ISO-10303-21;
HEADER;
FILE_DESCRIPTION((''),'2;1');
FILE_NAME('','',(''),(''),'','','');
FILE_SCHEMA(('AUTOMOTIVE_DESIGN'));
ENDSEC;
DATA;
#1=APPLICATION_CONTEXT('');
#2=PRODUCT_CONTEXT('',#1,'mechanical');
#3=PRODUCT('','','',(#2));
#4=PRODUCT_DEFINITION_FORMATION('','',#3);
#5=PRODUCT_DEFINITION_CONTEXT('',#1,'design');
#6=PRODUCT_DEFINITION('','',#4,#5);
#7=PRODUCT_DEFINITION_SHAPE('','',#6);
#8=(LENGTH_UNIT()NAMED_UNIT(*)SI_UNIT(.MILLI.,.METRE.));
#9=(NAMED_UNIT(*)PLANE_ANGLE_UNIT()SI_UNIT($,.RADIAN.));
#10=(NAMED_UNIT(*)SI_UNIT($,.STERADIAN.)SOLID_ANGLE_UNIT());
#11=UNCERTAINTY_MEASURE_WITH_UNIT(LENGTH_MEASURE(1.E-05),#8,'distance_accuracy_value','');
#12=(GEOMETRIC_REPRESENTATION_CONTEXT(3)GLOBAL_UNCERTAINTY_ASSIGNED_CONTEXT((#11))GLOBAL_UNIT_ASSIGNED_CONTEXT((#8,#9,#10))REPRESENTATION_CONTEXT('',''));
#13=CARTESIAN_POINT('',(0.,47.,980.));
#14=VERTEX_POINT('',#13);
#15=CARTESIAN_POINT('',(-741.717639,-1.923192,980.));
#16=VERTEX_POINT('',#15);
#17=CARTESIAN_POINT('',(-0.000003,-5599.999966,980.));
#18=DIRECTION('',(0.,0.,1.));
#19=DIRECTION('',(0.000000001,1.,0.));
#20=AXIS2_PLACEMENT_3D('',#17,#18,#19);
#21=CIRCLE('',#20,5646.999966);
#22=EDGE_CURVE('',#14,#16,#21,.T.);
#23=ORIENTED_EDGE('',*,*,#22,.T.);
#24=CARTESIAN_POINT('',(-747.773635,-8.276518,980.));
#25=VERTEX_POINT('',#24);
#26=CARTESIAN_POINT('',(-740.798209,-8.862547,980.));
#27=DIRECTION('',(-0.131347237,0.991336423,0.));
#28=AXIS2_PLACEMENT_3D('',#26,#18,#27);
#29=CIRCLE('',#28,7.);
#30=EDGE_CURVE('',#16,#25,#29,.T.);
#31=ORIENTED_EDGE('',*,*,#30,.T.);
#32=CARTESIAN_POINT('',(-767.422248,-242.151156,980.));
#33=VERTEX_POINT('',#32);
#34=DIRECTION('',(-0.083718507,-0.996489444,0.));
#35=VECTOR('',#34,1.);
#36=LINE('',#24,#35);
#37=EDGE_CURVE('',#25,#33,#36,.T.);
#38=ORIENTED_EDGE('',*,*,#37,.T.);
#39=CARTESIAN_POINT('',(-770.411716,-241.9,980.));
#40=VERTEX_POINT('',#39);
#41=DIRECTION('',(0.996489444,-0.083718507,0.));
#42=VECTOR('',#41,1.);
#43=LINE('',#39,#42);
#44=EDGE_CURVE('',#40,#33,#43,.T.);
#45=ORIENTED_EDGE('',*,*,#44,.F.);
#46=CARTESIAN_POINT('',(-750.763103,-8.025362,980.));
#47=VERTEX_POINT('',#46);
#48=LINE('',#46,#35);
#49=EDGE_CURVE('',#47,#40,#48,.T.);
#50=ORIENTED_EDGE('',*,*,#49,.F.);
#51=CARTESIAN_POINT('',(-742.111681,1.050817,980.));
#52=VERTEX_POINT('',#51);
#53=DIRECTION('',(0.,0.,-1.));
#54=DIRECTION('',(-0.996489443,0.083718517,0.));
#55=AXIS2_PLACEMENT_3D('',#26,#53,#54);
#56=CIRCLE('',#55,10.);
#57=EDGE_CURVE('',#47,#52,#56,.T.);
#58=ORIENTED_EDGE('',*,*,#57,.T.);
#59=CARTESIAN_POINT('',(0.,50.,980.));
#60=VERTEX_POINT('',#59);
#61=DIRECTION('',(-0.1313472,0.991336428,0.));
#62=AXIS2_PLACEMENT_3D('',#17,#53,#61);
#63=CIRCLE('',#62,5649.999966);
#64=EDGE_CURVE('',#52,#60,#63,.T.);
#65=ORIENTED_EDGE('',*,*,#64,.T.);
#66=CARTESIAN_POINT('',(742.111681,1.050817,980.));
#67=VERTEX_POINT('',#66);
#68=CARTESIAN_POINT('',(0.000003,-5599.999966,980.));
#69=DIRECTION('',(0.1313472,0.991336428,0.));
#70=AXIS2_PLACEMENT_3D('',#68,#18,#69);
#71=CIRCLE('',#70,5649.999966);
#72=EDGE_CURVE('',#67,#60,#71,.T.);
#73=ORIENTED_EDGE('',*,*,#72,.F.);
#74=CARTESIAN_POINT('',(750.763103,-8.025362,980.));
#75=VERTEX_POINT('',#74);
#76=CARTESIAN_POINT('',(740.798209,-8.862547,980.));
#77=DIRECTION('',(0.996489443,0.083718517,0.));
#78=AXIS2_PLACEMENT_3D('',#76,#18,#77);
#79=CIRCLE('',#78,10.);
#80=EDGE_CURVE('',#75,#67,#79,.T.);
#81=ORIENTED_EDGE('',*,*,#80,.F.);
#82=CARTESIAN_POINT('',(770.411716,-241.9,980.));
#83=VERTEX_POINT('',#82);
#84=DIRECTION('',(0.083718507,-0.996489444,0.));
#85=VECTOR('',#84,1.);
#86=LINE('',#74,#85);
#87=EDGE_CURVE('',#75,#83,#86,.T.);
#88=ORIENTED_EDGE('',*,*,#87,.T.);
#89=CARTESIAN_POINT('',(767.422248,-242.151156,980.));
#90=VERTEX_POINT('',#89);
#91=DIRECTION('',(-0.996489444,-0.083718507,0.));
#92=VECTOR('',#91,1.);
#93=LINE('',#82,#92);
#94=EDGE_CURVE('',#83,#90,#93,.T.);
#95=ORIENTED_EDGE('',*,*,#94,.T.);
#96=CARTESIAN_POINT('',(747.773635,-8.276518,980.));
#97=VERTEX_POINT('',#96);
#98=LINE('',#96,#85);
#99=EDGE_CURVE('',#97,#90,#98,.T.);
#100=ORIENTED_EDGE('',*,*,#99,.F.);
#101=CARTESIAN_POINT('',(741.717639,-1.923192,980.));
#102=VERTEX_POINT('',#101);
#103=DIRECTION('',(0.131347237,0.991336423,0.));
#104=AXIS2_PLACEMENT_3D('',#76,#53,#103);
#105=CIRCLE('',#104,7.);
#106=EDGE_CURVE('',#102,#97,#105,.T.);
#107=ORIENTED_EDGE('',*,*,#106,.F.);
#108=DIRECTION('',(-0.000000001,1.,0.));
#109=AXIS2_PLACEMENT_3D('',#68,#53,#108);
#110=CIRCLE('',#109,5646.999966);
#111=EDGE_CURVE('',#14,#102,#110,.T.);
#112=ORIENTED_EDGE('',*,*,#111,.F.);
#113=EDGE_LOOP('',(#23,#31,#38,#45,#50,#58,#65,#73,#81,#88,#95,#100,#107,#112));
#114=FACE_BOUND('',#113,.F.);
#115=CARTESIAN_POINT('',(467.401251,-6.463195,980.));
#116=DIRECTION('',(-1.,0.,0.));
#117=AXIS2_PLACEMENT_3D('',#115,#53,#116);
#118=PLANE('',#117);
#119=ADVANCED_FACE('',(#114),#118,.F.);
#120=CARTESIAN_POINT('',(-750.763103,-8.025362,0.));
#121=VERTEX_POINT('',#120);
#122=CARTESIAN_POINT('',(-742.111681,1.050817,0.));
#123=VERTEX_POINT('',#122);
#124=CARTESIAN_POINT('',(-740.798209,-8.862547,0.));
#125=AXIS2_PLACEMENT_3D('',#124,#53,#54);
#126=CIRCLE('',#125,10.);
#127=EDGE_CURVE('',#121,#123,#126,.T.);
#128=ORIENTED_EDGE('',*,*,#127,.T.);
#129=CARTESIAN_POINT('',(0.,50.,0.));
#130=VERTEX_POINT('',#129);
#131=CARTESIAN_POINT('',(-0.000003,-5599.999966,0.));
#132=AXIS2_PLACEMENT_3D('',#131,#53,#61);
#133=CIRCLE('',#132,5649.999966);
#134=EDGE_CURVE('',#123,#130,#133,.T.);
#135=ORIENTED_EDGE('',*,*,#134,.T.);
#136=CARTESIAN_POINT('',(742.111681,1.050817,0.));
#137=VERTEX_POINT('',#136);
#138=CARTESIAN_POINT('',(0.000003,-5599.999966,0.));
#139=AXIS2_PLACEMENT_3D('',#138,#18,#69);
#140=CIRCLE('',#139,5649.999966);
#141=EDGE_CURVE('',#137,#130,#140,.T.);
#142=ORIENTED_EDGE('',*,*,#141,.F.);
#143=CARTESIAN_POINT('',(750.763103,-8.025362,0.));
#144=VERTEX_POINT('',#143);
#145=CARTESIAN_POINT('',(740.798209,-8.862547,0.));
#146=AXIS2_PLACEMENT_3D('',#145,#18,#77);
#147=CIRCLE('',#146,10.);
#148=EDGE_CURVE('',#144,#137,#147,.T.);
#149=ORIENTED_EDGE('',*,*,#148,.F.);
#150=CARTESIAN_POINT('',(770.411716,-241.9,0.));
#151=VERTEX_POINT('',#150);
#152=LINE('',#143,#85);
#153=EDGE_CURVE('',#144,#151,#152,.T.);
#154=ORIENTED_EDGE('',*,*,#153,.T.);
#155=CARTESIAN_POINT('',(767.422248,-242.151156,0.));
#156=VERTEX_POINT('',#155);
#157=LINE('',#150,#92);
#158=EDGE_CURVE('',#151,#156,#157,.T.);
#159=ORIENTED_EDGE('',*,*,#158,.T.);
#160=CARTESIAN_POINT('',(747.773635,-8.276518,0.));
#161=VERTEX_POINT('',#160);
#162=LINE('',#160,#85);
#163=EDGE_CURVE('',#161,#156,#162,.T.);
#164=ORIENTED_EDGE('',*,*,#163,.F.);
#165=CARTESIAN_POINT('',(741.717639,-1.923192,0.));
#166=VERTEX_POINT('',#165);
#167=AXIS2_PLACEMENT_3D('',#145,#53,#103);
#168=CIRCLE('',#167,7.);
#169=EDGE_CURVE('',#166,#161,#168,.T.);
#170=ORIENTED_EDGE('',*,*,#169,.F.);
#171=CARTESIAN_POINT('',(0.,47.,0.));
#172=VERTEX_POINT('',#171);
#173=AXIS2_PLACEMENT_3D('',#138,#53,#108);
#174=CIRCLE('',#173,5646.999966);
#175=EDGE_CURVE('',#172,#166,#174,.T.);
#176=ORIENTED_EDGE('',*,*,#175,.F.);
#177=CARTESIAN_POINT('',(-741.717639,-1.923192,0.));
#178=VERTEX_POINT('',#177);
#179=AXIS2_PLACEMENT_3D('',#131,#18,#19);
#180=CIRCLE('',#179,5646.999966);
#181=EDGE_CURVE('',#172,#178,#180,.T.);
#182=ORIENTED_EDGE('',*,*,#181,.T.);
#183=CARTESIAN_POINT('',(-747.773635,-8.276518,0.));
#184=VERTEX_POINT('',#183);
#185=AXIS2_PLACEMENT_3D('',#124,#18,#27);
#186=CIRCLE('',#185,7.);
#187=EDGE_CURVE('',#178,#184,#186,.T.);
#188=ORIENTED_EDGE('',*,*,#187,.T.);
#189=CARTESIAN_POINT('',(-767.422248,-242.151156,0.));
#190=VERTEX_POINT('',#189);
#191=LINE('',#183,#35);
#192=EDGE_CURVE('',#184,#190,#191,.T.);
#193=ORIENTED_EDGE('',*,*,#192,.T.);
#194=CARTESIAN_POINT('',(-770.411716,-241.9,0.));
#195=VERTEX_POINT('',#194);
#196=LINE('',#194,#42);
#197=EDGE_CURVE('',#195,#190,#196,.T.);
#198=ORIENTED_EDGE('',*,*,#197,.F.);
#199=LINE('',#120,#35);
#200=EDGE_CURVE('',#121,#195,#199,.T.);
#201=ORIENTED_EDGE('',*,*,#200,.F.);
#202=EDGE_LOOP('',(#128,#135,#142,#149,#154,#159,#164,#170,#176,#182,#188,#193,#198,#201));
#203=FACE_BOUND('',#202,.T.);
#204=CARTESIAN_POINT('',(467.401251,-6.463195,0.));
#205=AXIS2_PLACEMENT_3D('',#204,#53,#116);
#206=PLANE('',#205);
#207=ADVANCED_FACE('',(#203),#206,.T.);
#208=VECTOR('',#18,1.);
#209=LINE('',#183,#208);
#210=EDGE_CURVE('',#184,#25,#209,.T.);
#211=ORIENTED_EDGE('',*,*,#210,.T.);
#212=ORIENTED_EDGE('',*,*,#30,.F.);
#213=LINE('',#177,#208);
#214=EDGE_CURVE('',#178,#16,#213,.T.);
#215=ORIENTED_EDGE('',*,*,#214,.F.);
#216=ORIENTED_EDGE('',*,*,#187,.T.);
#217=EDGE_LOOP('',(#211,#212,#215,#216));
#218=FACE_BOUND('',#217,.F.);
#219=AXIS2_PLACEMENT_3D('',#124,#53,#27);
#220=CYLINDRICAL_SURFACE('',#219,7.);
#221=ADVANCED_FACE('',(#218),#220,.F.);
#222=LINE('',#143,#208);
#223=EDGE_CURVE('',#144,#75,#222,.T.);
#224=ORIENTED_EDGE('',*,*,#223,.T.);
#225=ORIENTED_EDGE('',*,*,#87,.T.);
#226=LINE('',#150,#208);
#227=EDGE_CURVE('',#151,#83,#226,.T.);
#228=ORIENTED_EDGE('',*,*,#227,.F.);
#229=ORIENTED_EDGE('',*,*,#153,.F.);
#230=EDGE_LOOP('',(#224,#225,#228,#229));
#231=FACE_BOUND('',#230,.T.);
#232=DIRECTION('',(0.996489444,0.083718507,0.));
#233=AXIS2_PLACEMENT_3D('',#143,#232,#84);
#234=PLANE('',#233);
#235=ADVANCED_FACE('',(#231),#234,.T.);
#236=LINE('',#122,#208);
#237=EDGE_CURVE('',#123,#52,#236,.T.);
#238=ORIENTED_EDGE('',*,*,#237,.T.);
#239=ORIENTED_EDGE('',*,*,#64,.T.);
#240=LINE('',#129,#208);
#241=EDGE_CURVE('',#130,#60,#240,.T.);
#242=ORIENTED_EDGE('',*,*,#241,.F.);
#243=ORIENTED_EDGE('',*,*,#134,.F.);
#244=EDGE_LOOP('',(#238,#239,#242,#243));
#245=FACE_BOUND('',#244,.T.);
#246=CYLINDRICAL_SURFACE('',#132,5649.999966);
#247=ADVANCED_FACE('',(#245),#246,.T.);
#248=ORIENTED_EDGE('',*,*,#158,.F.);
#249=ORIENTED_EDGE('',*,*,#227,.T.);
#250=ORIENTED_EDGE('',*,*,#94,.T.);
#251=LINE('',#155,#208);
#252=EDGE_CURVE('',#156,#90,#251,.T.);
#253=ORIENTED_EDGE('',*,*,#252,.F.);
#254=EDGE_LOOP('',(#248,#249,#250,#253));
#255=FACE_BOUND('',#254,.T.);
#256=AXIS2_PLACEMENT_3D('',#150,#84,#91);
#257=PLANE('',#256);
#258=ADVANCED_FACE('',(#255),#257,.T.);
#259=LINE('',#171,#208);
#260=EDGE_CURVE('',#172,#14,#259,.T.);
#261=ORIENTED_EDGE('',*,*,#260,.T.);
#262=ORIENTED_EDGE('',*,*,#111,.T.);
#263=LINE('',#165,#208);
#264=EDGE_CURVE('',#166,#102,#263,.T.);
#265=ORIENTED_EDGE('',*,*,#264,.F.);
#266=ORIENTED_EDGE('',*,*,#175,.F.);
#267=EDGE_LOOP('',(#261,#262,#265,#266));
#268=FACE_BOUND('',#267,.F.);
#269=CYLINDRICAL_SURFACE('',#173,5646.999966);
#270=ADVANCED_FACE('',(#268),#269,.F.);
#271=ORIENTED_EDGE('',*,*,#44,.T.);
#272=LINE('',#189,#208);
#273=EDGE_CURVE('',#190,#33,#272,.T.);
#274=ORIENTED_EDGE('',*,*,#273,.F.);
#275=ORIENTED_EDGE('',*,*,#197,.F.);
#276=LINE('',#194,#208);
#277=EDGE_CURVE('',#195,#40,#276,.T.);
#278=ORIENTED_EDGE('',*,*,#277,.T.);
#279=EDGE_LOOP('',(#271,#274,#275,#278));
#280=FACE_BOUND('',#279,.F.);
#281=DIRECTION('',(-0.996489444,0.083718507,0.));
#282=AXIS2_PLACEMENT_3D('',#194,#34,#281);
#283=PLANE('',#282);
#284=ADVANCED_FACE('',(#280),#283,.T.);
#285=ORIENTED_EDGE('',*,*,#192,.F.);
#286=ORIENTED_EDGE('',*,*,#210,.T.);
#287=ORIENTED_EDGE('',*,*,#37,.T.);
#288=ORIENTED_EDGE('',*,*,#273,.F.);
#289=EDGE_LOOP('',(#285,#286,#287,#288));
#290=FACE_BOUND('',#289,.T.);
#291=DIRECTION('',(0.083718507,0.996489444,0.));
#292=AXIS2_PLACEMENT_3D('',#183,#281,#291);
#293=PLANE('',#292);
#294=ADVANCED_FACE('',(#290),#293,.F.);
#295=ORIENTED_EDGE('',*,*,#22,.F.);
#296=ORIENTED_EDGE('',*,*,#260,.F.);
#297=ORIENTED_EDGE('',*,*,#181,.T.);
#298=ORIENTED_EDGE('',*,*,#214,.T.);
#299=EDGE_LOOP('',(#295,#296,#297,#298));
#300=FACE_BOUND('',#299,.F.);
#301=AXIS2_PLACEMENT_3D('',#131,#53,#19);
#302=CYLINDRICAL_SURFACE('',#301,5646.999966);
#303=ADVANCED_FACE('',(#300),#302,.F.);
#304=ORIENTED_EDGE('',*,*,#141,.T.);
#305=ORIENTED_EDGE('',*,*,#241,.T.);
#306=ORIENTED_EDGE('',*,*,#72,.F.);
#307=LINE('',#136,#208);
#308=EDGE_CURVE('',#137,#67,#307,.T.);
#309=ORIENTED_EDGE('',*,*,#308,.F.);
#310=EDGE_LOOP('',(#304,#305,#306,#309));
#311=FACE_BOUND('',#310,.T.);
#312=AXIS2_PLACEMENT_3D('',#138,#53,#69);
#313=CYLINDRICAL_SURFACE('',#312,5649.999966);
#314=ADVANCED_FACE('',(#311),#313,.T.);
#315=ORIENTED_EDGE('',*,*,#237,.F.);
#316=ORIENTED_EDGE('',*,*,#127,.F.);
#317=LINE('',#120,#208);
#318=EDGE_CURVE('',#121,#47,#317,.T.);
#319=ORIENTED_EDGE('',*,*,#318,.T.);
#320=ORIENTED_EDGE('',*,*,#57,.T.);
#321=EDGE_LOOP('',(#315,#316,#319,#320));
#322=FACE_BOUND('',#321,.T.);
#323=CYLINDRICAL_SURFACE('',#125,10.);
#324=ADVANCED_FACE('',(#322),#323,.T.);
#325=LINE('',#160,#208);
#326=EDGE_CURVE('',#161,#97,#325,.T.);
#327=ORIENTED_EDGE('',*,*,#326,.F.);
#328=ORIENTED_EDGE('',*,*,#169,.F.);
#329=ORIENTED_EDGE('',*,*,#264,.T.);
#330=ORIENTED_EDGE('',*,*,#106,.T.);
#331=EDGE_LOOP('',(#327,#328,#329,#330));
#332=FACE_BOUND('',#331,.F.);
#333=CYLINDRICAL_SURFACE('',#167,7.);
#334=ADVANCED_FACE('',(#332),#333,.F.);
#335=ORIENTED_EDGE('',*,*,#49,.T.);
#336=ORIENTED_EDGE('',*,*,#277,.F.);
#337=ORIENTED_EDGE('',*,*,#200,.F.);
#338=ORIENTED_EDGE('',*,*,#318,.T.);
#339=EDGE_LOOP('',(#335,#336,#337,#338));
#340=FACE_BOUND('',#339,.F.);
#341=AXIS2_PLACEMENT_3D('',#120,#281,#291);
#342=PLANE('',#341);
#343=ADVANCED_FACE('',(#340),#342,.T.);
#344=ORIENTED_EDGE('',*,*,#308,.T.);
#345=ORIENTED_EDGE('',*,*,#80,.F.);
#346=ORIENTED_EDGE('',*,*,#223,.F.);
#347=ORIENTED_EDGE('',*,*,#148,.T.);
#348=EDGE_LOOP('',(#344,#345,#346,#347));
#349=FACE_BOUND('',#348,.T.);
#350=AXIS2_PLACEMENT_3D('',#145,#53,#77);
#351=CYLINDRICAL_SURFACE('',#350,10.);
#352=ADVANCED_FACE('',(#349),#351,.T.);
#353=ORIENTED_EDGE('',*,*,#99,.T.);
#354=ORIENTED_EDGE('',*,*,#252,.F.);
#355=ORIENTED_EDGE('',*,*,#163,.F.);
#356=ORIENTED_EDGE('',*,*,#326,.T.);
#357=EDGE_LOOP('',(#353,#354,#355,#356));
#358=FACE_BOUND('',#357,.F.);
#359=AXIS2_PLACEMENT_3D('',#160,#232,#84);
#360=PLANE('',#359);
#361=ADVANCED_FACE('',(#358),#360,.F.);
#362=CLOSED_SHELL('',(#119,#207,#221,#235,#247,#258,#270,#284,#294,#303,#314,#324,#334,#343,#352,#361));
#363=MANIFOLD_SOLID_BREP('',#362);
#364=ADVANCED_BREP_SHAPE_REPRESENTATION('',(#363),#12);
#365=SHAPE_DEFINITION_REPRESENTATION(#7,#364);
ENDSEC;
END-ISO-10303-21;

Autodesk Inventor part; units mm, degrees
ref_plane "YZ Plane" through (0, 0, 0) normal (1, 0, 0) x (0, 1, 0)
ref_plane "XZ Plane" through (0, 0, 0) normal (0, 1, 0) x (-1, 0, 0)
ref_plane "XY Plane" through (0, 0, 0) normal (0, 0, 1) x (1, 0, 0)
sketch "Sketch1" plane through (0, 0, 0) normal (0, 0, 1) x (1, 0, 0)
  line L0 (-750, 0) -> (750, 0) construction
  line L1 (750, 0) -> (750, -2700) construction
  line L2 (750, -2700) -> (-750, -2700) construction
  line L3 (-750, -2700) -> (-750, 0) construction
  line L4 (800, 50) -> (-800, 50) construction
  line L5 (-800, 50) -> (-800, -2750) construction
  line L6 (-800, -2750) -> (800, -2750) construction
  line L7 (800, -2750) -> (800, 50) construction
  line L8 (-850, 100) -> (850, 100) construction
  line L9 (850, 100) -> (850, -2800) construction
  line L10 (850, -2800) -> (-850, -2800) construction
  line L11 (-850, -2800) -> (-850, 100) construction
  arc A0 (750, 0) -> (742.111681, 1.050817) centre (0, -5600) ccw construction
  line L12 (-750, -2100) -> (750, -2100) construction
  line L13 (115.485997, -2697.8227) -> (750, -2100) construction
  arc A1 (750, -2100) -> (750, 0) centre (-10250, -1050) ccw construction
  arc A2 (110, -2700) -> (115.485997, -2697.8227) centre (110, -2692) ccw construction
  arc A3 (742.111681, 1.050817) -> (0, 50) centre (0, -5600) ccw
  line L14 (0, 100) -> (0, 50) construction
  line L15 (0, -2700) -> (0, -2697) construction
  line L16 (0, 47) -> (0, 0) construction
  line L17 (0, 50) -> (0, 47) construction
  line L18 (750.763103, -8.025362) -> (770.411716, -241.9)
  arc A4 (750.763103, -8.025362) -> (742.111681, 1.050817) centre (740.798209, -8.862547) ccw
  point P0 (0, -2750)
  dimension "d54" = 1500
  dimension "d55" = 2700
  dimension "d58" = 2100
  dimension "d83" = 8
  dimension "d113" = 50
  dimension "d114" = 50
  dimension "d115" = 3
  dimension "d121" = 10
  dimension "d122" = 241.9
  dimension "d124" = 94.8023
contour flange "Contour Flange2" sketch "Sketch1" thickness 3 bend radius 5 width 980 along (0, 0, 1) mid plane no both sides no wall seen from (760.58741, -124.962681, 0) lies toward (-0.9964894, -0.0837185, 0) curves L18 A4 A3
bend "Bend2"
corner "Corner2"
mirror "Mirror2" about plane through (0, 0, 0) normal (1, 0, 0)
sketch "Sketch2" plane through (747.773635, -8.276518, 0) normal (-0.9964894, -0.0837185, 0) x (0, 0, 1)
  line L0 (963.847804, -212.844904) -> (852.423188, -212.844904) construction
  line L1 (852.423188, -212.844904) -> (852.423188, -183.740468) construction
  line L2 (852.423188, -183.740468) -> (963.847804, -183.740468) construction
  line L3 (963.847804, -183.740468) -> (963.847804, -212.844904) construction
  point P0 (0, 70.849954)
mark "Mark1"
equation "\"d36\" = Thickness"
equation "\"d37\" = BendReliefWidth"
equation "\"d38\" = BendReliefDepth"
equation "\"d39\" = MinimumRemnant"
equation "\"d40\" = TransitionRadius"
equation "\"d42\" = BendRadius"
equation "\"d44\" = CornerReliefSize"
equation "\"d45\" = GapSize"
equation "\"d46\" = JacobiRadiusSize"
equation "\"BendReliefWidth\" = Thickness"
equation "\"BendReliefDepth\" = 0.5 * Thickness"
equation "\"CornerReliefSize\" = 4 * Thickness"
equation "\"MinimumRemnant\" = 2 * Thickness"
equation "\"GapSize\" = Thickness"
equation "\"Thickness\" = 3"
equation "\"TransitionRadius\" = 5"
equation "\"BendRadius\" = 5"
equation "\"JacobiRadiusSize\" = 5"
properties part number "MSC 201 SHEET BACK BASIC" material "Stainless Steel AISI 304"
